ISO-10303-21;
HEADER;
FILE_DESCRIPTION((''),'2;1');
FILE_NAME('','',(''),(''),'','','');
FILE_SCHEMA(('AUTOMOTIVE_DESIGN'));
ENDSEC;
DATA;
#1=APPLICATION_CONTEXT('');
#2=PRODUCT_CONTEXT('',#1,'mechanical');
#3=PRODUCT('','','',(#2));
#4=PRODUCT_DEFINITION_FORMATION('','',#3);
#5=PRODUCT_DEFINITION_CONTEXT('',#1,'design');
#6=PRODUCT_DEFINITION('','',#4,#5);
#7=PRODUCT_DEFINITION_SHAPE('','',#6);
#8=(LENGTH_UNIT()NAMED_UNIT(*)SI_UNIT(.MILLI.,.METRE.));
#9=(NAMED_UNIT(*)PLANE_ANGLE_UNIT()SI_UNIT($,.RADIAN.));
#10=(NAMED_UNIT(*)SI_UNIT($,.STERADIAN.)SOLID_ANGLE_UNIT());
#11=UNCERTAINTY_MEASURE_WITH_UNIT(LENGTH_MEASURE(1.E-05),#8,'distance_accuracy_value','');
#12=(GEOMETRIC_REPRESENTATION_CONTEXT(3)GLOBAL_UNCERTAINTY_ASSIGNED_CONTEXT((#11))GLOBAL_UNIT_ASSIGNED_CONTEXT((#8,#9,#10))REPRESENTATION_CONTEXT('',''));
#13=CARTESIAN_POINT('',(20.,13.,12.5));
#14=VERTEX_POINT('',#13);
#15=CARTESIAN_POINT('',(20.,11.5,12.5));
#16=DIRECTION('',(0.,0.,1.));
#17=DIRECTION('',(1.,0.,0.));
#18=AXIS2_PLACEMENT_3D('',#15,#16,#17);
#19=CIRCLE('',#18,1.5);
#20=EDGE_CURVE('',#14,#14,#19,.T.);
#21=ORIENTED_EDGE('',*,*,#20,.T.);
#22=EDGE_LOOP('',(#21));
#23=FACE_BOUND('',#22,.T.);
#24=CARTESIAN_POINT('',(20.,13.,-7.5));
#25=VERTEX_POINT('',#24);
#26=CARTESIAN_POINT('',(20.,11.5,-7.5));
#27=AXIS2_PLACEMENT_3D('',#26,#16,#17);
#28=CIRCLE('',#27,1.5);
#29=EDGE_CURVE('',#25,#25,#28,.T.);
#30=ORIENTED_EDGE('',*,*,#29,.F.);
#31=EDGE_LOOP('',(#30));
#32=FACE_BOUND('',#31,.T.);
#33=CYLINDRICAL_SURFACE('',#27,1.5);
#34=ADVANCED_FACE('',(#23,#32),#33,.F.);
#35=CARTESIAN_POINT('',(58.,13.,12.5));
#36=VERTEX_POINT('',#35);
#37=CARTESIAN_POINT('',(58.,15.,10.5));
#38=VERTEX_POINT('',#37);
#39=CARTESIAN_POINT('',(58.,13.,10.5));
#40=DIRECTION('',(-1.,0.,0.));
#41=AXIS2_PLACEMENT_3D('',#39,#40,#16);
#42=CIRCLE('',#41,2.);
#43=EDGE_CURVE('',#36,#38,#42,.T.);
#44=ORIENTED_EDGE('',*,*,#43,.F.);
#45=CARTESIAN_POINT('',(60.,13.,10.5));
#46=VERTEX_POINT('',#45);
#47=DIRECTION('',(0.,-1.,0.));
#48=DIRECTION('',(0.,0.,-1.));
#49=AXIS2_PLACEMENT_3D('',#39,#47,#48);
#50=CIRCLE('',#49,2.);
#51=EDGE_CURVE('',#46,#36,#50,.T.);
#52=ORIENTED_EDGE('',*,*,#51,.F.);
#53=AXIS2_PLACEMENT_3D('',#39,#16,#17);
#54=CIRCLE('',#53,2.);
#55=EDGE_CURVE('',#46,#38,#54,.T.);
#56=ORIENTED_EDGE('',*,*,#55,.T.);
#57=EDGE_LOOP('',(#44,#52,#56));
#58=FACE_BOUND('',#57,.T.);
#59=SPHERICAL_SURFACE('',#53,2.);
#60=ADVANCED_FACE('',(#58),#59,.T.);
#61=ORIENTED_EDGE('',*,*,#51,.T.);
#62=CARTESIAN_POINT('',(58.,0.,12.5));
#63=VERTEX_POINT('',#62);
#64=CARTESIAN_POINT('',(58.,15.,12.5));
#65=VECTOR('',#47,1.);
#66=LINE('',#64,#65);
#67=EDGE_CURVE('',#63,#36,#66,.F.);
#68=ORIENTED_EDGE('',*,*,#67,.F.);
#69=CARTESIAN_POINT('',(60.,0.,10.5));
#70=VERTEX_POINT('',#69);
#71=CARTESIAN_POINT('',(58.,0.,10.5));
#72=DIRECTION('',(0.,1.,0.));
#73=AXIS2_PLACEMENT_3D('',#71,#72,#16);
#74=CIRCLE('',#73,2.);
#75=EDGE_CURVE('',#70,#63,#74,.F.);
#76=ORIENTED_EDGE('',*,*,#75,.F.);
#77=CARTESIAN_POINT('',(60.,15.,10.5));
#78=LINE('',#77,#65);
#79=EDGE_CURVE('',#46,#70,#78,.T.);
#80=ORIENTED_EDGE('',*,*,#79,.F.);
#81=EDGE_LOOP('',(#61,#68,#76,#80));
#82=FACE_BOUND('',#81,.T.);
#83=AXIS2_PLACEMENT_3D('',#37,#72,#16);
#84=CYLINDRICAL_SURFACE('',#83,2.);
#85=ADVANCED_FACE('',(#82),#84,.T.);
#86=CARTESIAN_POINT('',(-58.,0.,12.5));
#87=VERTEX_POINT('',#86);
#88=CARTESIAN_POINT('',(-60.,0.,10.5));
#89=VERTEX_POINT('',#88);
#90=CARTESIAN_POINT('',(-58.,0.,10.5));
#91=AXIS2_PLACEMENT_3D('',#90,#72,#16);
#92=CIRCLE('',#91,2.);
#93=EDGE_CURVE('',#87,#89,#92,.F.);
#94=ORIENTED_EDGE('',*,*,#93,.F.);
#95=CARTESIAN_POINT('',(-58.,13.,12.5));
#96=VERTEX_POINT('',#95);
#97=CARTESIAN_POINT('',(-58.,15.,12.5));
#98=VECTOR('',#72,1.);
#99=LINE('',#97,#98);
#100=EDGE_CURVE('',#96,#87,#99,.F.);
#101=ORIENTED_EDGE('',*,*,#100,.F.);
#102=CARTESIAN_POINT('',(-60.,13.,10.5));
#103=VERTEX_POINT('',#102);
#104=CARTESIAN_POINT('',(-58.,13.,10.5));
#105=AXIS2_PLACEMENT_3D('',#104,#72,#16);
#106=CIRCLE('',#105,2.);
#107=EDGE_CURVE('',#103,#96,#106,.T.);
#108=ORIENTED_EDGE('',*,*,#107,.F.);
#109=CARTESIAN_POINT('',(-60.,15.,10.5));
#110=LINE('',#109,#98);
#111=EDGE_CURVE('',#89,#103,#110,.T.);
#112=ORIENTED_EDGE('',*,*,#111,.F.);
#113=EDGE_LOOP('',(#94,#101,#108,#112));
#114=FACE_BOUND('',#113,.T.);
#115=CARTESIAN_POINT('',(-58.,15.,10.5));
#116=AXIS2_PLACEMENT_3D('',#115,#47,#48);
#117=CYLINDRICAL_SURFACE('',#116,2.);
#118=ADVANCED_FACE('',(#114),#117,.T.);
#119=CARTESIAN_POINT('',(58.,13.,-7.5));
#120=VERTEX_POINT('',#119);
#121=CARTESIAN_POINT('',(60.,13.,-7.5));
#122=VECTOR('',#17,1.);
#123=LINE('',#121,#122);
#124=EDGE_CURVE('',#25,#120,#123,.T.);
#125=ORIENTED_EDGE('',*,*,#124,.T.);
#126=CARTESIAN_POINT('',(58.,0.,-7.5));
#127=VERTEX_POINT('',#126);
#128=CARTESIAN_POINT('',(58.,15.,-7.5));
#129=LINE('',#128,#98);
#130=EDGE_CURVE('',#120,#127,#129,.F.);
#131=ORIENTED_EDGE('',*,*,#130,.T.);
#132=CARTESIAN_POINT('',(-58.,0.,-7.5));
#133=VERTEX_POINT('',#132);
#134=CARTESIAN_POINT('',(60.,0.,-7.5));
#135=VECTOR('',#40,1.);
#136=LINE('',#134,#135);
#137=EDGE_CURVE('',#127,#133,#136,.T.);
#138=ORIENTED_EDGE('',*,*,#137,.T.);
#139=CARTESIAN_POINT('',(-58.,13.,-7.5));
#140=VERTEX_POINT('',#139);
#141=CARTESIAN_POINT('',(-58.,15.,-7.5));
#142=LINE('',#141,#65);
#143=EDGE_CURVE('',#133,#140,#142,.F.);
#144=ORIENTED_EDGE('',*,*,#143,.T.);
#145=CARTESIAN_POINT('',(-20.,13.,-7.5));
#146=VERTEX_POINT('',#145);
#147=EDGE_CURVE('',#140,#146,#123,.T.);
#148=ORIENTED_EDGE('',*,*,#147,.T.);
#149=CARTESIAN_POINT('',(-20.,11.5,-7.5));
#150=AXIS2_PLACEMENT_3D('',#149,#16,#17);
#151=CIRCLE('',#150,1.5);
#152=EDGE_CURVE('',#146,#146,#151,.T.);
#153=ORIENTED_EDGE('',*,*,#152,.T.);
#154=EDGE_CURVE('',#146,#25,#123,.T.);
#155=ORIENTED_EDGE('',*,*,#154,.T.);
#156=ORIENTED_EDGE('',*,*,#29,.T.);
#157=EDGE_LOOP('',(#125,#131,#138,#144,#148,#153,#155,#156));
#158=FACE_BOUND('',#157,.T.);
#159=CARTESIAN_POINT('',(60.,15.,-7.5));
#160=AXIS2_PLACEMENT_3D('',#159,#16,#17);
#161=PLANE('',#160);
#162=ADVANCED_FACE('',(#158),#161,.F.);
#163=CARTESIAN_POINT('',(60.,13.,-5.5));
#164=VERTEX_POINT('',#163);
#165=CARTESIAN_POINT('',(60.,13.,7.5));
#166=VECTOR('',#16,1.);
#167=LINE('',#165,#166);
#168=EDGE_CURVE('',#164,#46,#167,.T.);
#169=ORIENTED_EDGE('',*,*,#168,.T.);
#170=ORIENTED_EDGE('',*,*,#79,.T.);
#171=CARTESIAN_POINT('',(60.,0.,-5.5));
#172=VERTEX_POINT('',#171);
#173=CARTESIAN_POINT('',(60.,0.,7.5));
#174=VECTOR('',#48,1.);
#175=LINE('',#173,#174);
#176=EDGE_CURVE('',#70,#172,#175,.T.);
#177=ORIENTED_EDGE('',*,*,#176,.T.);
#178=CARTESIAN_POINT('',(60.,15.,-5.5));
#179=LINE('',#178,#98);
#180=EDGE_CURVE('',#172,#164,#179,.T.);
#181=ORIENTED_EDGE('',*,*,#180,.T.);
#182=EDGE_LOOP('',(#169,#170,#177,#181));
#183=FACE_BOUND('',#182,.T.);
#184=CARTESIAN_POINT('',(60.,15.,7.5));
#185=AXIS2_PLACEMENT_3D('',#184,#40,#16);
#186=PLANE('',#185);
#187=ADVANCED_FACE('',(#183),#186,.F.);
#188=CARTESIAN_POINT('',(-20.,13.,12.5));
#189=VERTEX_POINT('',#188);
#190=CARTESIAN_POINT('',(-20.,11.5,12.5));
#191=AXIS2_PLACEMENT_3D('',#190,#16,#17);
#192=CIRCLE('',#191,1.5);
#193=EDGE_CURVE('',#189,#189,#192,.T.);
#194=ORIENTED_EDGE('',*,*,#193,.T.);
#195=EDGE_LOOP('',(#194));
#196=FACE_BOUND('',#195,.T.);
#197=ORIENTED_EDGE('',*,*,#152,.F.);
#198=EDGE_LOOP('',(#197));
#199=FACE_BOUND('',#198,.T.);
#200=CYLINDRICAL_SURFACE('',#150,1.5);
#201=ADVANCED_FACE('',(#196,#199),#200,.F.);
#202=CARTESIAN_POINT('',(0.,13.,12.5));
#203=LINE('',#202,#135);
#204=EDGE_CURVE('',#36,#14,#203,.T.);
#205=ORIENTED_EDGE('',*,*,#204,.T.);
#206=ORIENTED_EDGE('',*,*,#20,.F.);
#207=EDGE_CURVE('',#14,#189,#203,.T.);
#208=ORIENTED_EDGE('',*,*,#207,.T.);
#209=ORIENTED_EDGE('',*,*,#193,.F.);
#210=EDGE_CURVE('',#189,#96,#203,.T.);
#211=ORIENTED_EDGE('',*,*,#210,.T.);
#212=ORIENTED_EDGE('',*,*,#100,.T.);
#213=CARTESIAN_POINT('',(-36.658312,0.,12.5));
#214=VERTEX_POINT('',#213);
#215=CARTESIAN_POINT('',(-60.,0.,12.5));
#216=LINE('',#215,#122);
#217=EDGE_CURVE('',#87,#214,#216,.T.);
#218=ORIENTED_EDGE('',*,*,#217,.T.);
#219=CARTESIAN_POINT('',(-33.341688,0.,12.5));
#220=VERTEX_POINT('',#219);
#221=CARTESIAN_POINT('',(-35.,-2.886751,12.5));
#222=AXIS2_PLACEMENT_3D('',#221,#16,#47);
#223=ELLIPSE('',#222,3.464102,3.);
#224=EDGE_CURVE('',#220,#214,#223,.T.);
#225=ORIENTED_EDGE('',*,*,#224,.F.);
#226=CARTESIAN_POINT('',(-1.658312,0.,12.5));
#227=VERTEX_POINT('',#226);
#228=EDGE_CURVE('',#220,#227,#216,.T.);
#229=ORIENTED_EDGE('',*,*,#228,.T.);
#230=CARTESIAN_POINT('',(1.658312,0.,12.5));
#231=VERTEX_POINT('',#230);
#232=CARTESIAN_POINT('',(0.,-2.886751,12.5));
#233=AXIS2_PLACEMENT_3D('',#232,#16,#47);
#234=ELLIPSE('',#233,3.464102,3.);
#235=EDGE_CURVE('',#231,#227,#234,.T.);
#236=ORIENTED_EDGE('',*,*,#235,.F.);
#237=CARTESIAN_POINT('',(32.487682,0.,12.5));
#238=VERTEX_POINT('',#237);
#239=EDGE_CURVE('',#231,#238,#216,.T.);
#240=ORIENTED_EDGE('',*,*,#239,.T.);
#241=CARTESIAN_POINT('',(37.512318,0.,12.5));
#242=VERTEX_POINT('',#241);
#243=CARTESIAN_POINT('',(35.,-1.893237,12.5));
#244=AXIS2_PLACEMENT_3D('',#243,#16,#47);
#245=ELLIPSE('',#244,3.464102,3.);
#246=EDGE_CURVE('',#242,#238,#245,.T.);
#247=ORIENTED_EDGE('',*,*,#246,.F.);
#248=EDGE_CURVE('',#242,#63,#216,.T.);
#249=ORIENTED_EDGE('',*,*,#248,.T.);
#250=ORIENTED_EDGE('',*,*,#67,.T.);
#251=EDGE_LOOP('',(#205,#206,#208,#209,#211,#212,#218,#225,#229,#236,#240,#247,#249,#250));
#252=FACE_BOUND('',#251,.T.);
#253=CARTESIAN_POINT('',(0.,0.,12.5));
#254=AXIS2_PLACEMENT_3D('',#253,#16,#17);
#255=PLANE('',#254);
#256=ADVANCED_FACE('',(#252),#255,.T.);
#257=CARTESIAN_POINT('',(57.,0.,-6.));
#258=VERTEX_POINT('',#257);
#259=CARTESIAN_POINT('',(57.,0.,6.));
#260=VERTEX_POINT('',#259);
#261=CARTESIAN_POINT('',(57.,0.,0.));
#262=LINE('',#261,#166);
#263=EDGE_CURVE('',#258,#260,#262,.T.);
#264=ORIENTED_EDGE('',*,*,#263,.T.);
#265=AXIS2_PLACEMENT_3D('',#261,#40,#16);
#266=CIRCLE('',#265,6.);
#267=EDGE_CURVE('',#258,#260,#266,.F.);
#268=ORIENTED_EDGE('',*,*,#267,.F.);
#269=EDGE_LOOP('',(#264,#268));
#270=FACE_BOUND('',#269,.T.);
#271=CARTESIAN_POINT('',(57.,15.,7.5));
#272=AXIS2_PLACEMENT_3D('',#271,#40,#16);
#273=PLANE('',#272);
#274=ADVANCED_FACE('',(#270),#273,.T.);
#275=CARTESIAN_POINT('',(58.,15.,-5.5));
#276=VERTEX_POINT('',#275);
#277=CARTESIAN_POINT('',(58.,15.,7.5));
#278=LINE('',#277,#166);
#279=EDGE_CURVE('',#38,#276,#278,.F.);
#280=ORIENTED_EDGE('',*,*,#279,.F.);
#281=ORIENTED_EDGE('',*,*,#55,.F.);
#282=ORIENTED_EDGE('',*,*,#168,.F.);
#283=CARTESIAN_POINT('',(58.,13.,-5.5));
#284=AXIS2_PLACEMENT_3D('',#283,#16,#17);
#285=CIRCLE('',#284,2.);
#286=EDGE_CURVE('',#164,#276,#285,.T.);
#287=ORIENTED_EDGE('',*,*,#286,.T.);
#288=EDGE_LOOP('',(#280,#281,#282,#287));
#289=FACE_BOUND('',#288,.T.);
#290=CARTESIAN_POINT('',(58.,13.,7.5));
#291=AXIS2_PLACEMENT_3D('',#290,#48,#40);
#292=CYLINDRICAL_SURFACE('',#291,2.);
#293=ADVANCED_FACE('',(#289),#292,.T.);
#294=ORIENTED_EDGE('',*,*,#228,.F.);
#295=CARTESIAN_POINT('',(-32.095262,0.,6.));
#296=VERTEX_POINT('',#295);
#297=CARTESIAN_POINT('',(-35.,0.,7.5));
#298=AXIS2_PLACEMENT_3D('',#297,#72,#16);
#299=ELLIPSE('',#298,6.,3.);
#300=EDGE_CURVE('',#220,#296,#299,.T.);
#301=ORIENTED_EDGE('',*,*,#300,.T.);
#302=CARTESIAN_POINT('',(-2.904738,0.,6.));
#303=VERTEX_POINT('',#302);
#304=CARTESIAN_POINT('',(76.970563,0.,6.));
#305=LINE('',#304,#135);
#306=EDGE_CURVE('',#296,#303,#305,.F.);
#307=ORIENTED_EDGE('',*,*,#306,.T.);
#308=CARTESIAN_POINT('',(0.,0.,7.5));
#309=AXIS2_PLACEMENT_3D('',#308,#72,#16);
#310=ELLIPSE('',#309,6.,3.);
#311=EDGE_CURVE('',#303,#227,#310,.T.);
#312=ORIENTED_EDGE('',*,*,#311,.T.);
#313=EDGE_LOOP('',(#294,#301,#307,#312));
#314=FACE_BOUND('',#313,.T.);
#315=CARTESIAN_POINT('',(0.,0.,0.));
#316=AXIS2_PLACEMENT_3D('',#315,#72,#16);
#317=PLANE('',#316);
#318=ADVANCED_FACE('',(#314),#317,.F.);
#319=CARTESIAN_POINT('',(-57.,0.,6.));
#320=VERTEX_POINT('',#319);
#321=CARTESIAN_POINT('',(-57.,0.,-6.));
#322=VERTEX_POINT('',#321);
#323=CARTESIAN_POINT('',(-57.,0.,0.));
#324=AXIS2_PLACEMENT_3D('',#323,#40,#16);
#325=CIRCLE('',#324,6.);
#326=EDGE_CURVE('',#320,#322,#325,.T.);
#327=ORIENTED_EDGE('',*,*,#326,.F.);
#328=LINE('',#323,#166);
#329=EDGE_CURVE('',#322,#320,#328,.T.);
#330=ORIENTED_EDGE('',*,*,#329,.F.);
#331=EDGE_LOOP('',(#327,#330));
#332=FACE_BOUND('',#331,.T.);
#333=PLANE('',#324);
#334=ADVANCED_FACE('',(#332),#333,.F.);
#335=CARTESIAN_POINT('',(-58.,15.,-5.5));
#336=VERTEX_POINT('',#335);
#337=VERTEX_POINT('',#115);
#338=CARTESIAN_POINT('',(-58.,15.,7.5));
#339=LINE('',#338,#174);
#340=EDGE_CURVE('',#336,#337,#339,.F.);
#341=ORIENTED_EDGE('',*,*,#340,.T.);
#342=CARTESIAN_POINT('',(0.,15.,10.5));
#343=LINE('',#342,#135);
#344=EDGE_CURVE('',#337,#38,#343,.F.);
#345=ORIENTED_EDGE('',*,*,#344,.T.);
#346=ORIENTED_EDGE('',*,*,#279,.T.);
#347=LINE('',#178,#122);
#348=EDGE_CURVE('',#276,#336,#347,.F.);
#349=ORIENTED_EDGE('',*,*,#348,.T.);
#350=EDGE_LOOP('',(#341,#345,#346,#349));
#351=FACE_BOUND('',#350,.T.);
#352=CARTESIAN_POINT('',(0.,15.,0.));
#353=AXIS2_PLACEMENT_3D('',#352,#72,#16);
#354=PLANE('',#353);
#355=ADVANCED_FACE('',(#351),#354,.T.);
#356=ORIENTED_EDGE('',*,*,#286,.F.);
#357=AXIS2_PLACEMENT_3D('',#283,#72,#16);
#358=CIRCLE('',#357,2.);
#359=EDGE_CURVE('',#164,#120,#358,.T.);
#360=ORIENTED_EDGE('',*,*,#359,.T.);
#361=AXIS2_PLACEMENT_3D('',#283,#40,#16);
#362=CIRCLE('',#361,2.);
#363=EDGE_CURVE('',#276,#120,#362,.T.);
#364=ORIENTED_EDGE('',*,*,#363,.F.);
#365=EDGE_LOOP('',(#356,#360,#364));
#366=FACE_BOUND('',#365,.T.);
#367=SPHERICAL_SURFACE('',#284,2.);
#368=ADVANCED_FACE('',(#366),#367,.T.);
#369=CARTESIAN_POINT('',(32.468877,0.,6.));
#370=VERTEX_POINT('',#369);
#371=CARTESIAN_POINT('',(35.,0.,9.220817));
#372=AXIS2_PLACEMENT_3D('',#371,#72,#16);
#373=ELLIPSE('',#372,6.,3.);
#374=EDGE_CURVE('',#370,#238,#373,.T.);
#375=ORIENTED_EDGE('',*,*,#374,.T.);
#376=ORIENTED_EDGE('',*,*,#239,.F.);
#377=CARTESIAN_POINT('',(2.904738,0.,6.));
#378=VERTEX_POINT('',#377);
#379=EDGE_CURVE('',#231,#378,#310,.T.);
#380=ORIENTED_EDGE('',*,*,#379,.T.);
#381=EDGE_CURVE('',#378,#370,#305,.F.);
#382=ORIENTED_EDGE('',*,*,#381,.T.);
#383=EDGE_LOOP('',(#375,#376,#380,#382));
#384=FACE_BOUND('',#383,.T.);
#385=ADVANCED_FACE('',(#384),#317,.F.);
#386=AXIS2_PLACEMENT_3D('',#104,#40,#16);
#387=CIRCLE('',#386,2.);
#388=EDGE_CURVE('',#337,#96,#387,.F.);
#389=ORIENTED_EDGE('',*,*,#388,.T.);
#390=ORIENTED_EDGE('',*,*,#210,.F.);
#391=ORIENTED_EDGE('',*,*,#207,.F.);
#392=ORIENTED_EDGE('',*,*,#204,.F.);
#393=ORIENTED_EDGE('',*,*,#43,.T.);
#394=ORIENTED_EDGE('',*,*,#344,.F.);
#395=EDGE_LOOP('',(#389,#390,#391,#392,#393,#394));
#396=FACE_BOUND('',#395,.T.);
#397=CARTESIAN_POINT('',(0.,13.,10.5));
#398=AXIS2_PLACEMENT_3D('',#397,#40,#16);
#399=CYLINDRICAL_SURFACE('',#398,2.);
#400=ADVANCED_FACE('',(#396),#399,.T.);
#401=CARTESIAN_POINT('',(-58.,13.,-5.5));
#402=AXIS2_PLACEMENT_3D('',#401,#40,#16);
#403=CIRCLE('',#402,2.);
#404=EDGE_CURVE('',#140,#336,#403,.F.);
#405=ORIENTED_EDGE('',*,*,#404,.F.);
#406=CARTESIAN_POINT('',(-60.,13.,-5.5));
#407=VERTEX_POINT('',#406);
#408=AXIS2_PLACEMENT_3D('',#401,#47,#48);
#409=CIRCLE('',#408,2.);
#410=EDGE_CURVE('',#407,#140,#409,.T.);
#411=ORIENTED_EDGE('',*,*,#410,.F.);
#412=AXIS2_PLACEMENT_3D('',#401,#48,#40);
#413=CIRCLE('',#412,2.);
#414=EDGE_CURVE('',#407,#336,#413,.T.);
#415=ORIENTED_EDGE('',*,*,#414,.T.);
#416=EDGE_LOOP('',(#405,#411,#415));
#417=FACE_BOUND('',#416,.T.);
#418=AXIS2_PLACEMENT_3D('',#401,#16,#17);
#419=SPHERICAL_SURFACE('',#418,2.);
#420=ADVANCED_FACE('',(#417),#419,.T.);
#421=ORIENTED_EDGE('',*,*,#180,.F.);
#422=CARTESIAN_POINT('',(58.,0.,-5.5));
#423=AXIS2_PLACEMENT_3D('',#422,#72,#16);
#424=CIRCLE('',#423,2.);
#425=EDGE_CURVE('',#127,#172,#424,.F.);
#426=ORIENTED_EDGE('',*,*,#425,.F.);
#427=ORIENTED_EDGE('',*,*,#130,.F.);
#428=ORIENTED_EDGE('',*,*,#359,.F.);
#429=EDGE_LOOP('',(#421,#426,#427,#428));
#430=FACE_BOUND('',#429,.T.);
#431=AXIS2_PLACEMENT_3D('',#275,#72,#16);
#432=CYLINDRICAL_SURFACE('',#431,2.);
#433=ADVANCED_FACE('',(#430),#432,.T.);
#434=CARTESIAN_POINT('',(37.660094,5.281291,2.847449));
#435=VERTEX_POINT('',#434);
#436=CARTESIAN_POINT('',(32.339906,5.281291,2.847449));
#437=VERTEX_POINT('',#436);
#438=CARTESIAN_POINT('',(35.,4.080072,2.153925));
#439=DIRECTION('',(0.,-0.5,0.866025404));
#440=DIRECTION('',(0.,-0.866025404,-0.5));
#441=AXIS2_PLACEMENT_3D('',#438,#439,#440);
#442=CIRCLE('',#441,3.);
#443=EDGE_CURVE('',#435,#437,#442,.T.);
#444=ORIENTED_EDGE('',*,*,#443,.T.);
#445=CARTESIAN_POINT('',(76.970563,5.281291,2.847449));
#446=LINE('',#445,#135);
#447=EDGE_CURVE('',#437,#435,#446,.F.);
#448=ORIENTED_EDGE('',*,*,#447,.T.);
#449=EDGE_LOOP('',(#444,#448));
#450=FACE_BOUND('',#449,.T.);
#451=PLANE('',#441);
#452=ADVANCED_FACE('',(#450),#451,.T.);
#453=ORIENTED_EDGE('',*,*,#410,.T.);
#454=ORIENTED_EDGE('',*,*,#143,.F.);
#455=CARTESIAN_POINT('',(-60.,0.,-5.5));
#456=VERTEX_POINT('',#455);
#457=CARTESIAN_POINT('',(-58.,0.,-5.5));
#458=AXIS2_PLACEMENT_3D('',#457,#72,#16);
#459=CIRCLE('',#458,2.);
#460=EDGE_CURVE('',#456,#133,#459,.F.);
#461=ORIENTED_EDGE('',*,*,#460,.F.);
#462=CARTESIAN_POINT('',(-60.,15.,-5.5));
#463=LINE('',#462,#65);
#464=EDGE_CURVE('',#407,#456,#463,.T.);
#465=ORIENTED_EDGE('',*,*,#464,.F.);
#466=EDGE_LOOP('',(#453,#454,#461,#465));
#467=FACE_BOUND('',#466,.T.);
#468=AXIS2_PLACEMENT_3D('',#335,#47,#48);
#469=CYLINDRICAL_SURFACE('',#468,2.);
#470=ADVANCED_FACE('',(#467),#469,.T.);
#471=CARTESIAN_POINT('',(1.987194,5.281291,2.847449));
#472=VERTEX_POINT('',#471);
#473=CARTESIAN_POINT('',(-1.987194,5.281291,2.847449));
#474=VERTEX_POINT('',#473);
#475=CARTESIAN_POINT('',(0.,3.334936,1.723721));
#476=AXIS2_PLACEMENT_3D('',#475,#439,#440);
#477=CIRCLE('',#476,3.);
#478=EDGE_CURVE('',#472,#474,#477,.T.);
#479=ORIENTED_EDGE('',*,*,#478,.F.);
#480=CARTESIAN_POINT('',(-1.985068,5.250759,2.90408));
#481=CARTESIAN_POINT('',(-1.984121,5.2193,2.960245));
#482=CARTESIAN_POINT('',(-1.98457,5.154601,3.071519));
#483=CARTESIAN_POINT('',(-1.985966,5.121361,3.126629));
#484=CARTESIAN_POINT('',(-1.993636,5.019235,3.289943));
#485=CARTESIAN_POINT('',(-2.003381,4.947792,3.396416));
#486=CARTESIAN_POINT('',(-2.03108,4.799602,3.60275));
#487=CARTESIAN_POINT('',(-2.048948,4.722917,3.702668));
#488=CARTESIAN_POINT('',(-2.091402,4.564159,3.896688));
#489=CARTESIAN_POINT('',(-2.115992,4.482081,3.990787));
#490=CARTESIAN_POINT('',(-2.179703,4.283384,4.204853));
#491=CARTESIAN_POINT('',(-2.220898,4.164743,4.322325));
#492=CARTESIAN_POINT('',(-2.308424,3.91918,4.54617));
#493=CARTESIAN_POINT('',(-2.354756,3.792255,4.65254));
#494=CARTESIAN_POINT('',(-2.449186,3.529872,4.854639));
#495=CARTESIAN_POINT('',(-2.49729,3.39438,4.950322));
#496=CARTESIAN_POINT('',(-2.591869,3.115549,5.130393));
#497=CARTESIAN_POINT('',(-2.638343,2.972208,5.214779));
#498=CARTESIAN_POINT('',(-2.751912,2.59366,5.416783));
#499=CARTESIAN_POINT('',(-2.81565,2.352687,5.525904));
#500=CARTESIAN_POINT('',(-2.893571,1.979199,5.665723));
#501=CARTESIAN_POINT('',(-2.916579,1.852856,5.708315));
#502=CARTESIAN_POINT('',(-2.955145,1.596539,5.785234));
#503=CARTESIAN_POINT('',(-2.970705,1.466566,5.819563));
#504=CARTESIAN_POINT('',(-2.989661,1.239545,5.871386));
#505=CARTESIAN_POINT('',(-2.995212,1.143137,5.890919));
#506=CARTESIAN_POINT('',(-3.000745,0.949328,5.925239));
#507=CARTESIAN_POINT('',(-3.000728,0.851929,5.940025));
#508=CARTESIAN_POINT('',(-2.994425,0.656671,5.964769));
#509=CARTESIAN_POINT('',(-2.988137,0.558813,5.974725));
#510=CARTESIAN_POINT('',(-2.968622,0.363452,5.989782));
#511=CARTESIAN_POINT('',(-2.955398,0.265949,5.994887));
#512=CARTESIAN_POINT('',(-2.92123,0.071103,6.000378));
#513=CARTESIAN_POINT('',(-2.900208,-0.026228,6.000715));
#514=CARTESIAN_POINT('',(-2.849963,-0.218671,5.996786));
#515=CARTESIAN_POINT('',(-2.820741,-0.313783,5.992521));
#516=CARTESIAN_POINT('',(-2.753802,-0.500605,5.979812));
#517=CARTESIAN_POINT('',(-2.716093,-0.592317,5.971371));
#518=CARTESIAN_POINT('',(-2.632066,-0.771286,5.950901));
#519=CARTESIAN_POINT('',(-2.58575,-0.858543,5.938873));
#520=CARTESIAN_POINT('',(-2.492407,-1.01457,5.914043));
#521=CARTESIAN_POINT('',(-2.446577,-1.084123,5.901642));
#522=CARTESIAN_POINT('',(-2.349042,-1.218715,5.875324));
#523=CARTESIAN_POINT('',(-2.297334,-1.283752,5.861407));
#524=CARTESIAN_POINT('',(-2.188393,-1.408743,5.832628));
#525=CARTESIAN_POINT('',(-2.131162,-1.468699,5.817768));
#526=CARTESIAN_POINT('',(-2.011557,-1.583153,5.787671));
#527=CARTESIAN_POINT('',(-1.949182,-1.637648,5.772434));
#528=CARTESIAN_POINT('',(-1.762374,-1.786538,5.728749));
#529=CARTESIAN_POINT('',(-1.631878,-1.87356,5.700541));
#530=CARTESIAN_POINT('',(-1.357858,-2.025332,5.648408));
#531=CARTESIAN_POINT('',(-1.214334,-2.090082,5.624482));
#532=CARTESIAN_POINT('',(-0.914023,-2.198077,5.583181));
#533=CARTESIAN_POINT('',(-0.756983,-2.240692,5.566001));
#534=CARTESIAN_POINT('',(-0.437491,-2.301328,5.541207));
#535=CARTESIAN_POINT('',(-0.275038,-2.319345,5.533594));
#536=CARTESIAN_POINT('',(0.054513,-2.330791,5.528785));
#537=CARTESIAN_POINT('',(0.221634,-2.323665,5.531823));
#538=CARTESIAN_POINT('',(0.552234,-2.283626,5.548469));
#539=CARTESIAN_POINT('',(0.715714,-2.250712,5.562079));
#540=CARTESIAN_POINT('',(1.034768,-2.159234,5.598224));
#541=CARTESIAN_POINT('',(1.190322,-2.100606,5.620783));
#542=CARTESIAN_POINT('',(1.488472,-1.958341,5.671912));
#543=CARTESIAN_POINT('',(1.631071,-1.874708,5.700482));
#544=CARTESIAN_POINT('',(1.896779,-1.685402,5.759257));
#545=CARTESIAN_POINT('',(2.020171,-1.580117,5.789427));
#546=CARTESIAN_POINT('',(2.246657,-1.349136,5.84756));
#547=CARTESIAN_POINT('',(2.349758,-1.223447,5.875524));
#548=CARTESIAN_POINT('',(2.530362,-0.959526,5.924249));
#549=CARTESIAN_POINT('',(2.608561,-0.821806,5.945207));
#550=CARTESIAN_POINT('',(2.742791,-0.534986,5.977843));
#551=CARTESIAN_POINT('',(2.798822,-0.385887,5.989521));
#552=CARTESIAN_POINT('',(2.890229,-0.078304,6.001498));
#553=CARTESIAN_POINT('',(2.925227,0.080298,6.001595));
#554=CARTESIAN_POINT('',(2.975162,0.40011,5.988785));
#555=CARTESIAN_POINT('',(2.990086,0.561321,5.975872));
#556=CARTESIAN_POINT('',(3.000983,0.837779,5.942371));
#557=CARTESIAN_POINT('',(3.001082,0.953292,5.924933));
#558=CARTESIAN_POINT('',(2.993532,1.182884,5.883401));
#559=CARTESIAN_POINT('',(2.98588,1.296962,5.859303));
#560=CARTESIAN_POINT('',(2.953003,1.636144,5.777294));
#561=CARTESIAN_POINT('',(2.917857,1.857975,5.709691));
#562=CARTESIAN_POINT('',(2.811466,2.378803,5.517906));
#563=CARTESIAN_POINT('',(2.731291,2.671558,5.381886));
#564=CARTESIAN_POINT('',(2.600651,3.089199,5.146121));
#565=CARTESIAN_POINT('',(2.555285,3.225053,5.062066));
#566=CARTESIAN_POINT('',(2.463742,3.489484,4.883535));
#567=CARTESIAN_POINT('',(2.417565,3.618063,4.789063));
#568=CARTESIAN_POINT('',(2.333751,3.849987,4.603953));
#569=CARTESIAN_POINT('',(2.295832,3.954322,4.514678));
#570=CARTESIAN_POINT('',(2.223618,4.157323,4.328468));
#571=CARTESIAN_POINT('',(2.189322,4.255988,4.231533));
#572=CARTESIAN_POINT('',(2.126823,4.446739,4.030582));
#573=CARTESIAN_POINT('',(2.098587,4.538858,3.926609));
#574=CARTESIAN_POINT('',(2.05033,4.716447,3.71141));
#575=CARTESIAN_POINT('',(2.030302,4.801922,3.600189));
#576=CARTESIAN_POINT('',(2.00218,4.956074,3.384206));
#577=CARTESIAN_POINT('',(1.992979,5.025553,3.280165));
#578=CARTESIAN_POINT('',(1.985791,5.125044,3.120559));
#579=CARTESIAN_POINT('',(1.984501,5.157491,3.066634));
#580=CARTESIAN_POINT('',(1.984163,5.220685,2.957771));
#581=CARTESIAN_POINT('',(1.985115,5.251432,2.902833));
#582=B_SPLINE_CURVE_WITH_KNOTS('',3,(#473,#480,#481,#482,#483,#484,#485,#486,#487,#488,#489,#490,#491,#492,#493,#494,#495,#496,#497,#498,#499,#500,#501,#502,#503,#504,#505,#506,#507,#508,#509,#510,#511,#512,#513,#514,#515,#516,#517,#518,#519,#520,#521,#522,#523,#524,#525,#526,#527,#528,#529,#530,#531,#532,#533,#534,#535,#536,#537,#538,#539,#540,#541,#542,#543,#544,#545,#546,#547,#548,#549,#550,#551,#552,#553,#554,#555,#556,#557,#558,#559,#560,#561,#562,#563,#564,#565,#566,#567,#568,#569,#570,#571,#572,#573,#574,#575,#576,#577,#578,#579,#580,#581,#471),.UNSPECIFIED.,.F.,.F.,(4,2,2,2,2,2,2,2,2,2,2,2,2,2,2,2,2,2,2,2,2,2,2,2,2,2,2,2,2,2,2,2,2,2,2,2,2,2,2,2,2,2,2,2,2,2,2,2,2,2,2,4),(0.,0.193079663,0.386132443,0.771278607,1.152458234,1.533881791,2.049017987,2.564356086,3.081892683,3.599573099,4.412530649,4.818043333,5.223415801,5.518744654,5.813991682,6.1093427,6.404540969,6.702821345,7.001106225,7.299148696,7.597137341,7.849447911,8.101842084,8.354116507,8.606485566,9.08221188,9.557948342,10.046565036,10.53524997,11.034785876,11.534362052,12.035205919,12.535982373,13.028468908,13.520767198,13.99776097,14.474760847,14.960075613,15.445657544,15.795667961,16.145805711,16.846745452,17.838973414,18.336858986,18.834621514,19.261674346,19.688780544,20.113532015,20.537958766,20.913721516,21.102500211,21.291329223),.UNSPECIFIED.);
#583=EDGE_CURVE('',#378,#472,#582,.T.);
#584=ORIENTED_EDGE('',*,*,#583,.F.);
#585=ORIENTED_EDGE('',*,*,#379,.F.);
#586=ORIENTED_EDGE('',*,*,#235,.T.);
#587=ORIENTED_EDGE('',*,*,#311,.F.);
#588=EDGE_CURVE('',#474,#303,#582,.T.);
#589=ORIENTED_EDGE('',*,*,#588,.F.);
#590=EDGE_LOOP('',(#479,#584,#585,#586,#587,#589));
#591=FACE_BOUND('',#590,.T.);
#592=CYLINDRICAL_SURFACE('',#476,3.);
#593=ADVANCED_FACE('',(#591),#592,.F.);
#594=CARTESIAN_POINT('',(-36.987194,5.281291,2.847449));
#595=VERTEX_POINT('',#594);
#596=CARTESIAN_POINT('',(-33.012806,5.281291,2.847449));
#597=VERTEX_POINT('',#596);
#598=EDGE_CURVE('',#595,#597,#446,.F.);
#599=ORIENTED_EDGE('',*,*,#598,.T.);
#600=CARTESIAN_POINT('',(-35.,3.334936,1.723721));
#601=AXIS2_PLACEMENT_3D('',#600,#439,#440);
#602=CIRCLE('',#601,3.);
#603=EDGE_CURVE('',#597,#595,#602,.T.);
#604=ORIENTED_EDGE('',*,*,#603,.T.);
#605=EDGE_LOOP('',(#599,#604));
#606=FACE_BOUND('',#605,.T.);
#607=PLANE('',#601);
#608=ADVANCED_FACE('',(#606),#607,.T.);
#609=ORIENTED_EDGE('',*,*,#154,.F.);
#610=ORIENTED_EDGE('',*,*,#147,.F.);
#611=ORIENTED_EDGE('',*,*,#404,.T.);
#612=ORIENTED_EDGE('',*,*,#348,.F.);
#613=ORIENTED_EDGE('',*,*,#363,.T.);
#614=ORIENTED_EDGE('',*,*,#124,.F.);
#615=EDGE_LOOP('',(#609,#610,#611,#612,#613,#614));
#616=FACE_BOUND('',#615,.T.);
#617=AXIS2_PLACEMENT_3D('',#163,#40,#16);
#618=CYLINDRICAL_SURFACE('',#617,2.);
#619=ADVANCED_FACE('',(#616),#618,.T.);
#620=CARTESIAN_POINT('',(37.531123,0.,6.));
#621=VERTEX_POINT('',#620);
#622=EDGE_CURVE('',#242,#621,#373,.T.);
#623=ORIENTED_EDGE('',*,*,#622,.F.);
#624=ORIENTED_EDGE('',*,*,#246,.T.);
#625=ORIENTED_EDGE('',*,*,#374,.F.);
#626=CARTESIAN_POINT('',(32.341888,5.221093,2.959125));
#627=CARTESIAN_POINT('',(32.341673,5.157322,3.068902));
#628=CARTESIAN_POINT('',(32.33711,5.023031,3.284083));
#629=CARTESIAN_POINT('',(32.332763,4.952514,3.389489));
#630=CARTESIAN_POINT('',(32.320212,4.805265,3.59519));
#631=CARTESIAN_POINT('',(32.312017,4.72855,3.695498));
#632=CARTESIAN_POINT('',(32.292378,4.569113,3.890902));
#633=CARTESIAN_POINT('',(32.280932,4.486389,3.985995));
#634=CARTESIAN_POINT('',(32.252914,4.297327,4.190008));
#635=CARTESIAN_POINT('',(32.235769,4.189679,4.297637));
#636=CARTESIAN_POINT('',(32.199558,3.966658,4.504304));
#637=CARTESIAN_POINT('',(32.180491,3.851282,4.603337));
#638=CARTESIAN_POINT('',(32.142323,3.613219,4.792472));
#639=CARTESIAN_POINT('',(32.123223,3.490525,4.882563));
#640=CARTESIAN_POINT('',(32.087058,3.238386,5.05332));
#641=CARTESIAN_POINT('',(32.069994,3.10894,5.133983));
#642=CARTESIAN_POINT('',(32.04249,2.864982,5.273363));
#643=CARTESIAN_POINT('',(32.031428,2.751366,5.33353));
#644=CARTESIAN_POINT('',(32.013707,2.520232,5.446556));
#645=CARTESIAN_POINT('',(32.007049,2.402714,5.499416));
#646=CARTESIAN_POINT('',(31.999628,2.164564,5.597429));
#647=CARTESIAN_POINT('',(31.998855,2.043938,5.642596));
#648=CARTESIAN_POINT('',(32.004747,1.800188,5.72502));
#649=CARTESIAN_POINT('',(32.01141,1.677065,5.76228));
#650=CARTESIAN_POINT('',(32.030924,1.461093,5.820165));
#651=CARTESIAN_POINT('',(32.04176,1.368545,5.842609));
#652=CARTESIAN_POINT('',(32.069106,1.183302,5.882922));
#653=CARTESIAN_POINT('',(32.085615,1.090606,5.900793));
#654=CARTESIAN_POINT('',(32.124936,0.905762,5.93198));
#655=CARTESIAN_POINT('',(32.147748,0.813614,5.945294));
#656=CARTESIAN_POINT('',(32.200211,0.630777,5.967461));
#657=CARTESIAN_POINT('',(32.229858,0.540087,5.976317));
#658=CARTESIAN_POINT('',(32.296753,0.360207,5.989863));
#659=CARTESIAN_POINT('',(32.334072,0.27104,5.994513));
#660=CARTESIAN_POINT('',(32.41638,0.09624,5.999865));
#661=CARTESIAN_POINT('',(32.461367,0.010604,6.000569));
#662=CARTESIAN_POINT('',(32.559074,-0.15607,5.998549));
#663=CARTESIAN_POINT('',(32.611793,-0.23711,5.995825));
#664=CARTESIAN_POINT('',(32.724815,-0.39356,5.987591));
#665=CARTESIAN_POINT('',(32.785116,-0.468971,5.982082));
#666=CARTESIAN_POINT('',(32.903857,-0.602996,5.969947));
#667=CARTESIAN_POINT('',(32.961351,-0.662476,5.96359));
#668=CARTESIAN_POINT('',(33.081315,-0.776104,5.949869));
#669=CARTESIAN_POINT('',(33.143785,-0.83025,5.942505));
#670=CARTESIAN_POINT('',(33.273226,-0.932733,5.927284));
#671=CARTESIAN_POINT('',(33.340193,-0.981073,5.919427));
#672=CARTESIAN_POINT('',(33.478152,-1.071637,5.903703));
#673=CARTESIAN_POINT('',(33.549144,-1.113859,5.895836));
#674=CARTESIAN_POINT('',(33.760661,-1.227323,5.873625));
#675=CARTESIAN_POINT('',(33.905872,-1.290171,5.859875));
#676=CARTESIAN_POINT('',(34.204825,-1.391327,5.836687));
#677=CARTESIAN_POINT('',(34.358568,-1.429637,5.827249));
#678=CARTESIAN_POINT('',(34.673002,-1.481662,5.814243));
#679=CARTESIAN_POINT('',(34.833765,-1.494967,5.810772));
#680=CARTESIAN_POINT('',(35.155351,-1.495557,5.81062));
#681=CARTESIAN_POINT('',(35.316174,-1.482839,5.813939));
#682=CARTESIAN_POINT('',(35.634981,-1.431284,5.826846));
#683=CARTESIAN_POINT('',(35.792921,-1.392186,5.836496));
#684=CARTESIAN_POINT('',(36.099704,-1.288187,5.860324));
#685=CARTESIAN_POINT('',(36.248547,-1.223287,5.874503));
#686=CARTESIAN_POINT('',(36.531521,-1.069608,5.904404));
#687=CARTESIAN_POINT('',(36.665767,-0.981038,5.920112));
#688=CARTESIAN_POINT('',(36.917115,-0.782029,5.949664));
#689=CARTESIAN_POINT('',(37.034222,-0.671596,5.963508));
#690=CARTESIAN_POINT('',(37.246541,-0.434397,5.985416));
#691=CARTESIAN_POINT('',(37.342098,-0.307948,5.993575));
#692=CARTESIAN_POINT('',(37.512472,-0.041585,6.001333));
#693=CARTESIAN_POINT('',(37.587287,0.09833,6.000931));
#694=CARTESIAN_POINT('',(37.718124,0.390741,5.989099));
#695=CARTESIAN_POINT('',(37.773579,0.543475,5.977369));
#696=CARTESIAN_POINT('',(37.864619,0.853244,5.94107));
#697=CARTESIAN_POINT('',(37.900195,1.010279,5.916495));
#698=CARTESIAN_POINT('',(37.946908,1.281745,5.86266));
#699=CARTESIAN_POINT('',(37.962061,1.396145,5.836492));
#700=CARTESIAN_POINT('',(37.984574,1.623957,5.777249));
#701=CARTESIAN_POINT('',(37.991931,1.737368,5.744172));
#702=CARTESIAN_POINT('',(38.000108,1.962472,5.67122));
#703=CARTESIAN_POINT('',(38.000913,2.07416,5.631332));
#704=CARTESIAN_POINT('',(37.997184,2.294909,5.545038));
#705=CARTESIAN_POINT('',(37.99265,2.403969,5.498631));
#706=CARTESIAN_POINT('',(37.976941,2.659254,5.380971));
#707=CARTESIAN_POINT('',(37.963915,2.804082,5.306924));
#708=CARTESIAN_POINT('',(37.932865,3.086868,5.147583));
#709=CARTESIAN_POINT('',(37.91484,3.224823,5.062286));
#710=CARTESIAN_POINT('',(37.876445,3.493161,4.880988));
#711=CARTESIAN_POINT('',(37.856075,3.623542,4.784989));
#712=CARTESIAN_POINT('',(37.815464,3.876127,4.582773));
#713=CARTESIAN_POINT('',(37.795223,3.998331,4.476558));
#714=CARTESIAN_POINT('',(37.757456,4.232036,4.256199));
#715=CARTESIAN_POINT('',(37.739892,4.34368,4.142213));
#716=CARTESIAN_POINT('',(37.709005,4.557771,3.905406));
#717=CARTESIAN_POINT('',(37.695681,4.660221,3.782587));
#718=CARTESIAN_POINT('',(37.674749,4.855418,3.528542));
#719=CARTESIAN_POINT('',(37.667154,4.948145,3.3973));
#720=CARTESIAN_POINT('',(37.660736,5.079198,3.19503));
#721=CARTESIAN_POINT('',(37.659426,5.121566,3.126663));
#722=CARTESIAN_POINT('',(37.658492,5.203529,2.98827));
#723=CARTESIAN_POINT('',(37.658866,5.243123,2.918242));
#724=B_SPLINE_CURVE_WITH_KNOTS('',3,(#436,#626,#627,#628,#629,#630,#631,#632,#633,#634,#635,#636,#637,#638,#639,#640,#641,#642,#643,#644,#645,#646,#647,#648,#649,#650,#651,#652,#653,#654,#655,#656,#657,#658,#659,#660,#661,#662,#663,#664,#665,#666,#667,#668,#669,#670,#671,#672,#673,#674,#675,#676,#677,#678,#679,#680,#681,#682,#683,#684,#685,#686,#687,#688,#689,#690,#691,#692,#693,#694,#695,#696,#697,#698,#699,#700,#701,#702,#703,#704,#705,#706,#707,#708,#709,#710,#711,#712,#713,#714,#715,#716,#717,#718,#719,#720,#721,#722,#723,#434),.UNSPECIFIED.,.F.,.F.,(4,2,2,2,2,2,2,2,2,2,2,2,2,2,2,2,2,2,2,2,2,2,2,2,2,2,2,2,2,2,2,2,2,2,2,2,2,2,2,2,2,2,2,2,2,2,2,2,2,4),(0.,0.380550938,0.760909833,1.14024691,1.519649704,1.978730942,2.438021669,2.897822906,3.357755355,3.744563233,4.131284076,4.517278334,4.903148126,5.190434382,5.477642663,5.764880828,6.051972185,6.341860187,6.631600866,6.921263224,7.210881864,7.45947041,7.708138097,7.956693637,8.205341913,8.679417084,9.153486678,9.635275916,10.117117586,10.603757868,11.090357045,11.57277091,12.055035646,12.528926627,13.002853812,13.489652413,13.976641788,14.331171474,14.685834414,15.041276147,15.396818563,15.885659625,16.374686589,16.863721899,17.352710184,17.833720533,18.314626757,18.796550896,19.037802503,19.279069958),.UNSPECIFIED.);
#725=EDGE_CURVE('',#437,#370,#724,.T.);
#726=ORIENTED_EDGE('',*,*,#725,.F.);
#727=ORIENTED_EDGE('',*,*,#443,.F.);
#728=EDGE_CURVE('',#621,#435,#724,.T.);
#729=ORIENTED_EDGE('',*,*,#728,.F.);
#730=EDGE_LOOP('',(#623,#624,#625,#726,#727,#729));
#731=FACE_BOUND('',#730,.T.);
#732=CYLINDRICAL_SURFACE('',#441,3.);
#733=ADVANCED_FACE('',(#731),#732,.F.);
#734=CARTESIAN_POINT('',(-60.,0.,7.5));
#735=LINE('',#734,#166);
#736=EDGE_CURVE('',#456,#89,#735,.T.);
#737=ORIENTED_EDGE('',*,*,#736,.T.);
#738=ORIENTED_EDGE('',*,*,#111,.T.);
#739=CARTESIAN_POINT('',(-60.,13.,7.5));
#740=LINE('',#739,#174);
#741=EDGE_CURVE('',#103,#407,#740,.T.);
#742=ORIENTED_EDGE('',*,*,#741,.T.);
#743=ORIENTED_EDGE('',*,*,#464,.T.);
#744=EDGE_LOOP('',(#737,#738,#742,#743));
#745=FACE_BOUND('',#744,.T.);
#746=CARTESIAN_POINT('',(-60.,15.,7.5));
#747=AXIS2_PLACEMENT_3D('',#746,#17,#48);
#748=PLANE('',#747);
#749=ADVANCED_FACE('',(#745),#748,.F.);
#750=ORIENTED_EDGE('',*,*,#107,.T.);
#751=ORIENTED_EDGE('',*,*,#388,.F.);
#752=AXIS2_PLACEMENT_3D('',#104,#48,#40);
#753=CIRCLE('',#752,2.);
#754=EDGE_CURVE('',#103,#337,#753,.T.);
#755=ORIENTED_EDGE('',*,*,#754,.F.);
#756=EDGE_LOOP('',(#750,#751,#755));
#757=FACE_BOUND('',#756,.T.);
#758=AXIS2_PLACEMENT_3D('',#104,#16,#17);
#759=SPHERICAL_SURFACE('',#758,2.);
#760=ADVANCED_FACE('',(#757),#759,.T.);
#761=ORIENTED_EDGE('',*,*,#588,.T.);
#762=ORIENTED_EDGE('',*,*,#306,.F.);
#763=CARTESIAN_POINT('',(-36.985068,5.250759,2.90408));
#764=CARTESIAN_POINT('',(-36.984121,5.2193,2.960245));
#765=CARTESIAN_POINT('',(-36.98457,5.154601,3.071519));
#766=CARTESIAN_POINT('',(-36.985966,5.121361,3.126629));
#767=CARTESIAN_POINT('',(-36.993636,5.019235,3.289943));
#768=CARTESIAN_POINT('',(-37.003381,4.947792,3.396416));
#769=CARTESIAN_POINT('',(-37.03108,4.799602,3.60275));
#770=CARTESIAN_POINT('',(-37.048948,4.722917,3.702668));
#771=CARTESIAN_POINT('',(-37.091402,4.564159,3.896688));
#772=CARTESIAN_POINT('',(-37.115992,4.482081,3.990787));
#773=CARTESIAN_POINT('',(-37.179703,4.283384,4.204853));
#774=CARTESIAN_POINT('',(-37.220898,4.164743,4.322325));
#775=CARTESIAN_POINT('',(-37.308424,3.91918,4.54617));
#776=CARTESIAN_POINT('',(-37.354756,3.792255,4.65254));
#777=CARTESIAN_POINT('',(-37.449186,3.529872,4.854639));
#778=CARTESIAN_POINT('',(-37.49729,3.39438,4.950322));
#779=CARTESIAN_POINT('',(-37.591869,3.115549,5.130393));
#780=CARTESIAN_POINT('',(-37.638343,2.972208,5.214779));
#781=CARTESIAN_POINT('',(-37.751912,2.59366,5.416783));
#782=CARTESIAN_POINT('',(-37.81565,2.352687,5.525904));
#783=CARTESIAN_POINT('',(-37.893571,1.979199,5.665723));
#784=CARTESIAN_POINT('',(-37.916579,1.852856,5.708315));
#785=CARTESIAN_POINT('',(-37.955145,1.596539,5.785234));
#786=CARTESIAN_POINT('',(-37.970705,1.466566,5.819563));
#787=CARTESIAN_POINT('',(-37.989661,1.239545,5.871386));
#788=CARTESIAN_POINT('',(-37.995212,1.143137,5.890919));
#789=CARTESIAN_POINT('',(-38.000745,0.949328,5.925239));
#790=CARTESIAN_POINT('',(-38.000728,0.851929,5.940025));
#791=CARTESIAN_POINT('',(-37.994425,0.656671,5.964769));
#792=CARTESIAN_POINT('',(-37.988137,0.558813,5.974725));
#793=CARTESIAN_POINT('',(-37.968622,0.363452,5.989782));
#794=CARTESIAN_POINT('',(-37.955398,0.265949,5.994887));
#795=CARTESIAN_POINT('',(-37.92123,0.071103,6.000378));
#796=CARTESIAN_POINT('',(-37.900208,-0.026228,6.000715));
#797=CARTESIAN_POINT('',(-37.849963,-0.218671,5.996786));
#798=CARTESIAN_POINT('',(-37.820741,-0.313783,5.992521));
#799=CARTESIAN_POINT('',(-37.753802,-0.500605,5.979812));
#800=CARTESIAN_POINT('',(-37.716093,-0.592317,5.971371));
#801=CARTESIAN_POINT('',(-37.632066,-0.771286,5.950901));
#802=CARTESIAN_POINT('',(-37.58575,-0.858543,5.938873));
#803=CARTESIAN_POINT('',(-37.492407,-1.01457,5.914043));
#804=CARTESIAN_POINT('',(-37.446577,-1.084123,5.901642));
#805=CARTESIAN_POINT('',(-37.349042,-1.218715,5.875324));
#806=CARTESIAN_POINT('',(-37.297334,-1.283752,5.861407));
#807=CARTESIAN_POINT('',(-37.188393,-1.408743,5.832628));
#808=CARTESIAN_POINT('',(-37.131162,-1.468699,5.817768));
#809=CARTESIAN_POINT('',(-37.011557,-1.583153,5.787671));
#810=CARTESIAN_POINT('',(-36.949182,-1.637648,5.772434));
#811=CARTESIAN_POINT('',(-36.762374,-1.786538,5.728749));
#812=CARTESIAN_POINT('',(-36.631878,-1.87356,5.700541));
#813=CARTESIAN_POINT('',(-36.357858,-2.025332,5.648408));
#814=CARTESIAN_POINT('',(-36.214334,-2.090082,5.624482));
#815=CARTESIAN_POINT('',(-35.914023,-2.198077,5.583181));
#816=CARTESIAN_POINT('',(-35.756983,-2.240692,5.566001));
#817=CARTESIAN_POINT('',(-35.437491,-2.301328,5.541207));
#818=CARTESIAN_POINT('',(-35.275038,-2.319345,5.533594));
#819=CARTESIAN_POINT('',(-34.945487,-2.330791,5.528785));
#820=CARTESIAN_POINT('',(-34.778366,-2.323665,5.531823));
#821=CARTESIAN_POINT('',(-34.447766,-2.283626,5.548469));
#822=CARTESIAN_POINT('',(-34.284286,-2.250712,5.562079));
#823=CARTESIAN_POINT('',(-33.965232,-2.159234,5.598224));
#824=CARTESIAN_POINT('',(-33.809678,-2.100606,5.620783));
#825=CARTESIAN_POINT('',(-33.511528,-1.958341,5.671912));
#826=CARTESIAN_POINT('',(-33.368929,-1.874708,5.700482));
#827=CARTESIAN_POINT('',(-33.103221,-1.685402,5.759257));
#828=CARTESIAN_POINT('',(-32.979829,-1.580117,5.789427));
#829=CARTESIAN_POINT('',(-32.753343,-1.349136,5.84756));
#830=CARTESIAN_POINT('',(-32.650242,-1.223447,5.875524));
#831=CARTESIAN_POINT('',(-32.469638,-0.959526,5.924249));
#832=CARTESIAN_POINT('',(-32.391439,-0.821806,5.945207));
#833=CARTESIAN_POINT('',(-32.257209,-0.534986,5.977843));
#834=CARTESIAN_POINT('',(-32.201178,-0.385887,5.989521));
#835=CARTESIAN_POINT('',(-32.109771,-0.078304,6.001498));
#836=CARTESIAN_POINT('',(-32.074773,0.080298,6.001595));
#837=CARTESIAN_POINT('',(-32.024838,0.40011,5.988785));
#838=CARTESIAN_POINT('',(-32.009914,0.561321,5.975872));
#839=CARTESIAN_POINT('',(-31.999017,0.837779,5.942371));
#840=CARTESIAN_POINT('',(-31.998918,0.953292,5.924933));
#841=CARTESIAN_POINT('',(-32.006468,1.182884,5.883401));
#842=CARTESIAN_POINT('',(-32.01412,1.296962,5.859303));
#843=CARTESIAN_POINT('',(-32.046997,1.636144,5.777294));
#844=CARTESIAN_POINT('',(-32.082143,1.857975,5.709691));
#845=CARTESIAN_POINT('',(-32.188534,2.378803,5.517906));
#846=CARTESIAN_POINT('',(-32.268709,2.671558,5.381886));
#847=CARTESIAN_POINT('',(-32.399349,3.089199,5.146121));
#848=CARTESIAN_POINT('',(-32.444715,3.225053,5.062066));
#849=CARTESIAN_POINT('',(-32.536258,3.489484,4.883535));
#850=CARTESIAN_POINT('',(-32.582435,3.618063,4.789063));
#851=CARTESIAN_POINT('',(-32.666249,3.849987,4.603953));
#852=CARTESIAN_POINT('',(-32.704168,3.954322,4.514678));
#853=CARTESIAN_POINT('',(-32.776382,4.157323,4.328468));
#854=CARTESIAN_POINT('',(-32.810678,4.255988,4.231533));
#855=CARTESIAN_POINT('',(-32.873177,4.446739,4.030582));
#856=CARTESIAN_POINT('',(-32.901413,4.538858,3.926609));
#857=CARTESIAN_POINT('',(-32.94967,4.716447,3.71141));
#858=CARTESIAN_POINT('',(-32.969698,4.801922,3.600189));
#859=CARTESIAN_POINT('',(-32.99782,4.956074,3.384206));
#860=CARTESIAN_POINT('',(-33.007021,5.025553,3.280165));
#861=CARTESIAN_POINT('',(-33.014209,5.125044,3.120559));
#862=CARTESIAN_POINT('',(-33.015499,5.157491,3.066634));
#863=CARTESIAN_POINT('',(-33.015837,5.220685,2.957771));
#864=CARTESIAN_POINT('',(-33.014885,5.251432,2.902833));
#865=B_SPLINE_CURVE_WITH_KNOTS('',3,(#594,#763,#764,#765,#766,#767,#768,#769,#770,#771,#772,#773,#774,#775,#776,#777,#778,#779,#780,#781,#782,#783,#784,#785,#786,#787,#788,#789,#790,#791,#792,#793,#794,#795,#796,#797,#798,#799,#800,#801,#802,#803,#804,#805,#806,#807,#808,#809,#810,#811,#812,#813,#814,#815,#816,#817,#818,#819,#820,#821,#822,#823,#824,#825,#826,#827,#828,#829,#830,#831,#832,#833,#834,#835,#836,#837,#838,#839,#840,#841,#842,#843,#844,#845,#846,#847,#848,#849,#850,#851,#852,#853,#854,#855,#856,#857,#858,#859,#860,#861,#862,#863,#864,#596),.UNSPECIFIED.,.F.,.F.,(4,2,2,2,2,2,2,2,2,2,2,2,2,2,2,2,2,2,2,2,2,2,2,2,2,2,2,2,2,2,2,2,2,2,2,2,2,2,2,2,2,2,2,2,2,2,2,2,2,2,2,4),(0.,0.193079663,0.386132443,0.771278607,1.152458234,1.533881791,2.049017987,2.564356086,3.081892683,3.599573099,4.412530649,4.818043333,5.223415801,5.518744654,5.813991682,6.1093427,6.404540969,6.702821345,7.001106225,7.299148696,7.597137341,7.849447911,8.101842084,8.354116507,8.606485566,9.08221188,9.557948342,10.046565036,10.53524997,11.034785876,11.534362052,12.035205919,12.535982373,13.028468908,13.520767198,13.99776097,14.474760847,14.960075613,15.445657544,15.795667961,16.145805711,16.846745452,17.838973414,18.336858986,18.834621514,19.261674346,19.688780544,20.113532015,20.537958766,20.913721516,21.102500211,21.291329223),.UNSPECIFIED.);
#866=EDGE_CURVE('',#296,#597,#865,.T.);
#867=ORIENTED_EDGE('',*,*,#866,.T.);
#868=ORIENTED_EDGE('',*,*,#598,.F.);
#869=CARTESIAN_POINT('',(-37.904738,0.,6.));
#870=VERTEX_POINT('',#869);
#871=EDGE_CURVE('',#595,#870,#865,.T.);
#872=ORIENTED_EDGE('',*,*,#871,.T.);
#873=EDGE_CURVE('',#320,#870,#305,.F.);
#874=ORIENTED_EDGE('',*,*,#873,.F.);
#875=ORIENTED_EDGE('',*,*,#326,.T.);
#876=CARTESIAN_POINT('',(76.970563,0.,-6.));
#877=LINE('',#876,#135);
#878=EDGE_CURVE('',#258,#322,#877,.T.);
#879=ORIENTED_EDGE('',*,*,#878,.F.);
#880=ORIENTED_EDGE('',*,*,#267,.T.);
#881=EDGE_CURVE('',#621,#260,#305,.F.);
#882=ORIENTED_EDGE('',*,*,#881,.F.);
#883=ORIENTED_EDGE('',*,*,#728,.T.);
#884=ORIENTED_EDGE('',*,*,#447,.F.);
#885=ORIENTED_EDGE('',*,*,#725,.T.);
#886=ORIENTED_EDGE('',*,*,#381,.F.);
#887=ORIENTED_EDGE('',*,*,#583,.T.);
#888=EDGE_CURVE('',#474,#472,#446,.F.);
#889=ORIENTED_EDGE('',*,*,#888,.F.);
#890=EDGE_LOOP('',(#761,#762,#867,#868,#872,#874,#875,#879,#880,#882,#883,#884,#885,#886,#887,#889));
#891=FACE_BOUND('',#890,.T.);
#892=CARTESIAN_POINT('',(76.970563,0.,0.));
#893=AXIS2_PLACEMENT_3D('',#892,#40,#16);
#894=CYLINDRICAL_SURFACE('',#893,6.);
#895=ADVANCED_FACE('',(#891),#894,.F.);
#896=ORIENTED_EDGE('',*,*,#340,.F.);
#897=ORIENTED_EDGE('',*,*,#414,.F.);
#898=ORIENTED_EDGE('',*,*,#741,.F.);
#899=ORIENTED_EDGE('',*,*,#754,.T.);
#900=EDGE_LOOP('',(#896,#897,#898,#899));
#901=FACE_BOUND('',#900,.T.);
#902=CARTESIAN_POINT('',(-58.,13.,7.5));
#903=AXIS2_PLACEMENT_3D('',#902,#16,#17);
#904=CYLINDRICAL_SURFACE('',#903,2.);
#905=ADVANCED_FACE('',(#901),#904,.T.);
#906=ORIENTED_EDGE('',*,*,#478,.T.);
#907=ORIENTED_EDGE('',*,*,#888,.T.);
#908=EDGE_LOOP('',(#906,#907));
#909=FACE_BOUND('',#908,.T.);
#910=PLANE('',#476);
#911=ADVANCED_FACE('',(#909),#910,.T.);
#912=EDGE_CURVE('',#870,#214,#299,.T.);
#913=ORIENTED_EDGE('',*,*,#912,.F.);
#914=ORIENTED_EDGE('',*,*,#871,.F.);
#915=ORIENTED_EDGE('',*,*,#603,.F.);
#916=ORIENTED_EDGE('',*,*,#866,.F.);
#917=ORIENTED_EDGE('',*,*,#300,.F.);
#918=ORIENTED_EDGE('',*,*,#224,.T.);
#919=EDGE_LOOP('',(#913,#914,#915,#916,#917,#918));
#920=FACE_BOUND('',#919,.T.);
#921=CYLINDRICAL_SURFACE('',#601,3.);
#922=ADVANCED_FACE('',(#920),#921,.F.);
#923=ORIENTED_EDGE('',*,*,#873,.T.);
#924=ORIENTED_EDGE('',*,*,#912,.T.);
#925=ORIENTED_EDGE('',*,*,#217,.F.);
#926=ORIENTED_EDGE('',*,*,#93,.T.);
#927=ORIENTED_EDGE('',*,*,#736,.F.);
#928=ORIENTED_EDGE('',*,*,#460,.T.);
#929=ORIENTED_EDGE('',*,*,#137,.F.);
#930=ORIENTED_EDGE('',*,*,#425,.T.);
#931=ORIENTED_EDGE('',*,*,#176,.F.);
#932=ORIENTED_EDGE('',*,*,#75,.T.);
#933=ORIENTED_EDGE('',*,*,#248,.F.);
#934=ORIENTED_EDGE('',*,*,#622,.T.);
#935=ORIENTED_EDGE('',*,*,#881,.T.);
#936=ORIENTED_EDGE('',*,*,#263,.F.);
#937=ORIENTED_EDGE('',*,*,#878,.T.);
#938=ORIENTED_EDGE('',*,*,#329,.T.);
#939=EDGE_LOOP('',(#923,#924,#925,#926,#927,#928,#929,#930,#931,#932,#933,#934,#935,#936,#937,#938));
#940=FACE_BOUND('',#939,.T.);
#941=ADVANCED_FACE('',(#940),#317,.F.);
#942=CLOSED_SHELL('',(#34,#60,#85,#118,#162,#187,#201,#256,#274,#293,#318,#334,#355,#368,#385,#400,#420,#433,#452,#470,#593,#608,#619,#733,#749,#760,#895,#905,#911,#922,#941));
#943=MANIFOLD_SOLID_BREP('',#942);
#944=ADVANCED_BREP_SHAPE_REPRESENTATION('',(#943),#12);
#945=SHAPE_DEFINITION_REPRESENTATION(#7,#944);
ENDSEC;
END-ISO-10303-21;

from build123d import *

# Parameters (mm, degrees)
SKETCH1_W           = 120
SKETCH1_H           = 15
BOSS_EXTRUDE1_DEPTH = 15
CUT_EXTRUDE4_START  = -3
SKETCH2_R           = 6
CUT_EXTRUDE4_DEPTH  = 114
SKETCH3_W           = 120
SKETCH3_H           = 15
BOSS_EXTRUDE2_DEPTH = 5
SKETCH5_R           = 3
CUT_EXTRUDE5_DEPTH  = 11
SKETCH6_R           = 1.5
CUT_EXTRUDE6_DEPTH  = 66
FILLET2_R           = 2
FILLET3_R           = 2
FILLET4_R           = 2
FILLET5_R           = 2


with BuildPart() as part:
    # Sketch1 → Boss-Extrude1 (new body)
    with BuildSketch(Plane(origin=(0, 0, 0), x_dir=(1, 0, 0), z_dir=(0, 1, 0))):
        Rectangle(SKETCH1_W, SKETCH1_H)
    extrude(amount=BOSS_EXTRUDE1_DEPTH)

    # Sketch2 → Cut-Extrude4 (cut)
    with BuildSketch(Plane.ZY.offset(60).offset(CUT_EXTRUDE4_START)):
        Circle(SKETCH2_R)
    extrude(amount=-CUT_EXTRUDE4_DEPTH, mode=Mode.SUBTRACT)

    # Sketch3 → Boss-Extrude2 (add)
    with BuildSketch(Plane.XY.offset(7.5)):
        with Locations((0, 7.5)):
            Rectangle(SKETCH3_W, SKETCH3_H)
    extrude(amount=BOSS_EXTRUDE2_DEPTH)

    # Sketch5 → Cut-Extrude5 (cut)
    with BuildSketch(Plane(origin=(0, -5.412658774, 9.375), x_dir=(1, 0, 0), z_dir=(0, -0.499999999999998, 0.8660254037844398))):
        with Locations((-35, 3.75)):
            Circle(SKETCH5_R)
        with Locations((0, 3.75)):
            Circle(SKETCH5_R)
        with Locations((35, 4.610408675)):
            Circle(SKETCH5_R)
    extrude(amount=-CUT_EXTRUDE5_DEPTH, mode=Mode.SUBTRACT)

    # Sketch6 → Cut-Extrude6 (cut, through all)
    with BuildSketch(Plane.XY.offset(12.5)):
        with Locations((-20, 11.5)):
            Circle(SKETCH6_R)
        with Locations((20, 11.5)):
            Circle(SKETCH6_R)
    extrude(amount=-CUT_EXTRUDE6_DEPTH, mode=Mode.SUBTRACT)

    # Fillet2
    fillet2_edges = [part.edges().sort_by_distance(p)[0] for p in [
        (0, 15, -7.5),
    ]]
    fillet(fillet2_edges, radius=FILLET2_R - 0.0001)  # a hair under: the kernel refuses the full size

    # Fillet3
    fillet3_edges = [part.edges().sort_by_distance(p)[0] for p in [
        (0, 15, 12.5),
    ]]
    fillet(fillet3_edges, radius=FILLET3_R - 0.0001)  # a hair under: the kernel refuses the full size

    # Fillet4
    fillet4_edges = [part.edges().sort_by_distance(p)[0] for p in [
        (-60, 6.50005, -7.5),
        (-60, 15, 2.5),
        (-60, 14.414242852, -6.914242852),
        (-60, 6.50005, 12.5),
        (-60, 14.414242852, 11.914242852),
    ]]
    fillet(fillet4_edges, radius=FILLET4_R - 0.0001)  # a hair under: the kernel refuses the full size

    # Fillet5
    fillet5_edges = [part.edges().sort_by_distance(p)[0] for p in [
        (60, 6.50005, 12.5),
        (60, 6.50005, -7.5),
        (60, 14.414242852, -6.914242852),
        (60, 15, 2.5),
        (60, 14.414242852, 11.914242852),
    ]]
    fillet(fillet5_edges, radius=FILLET5_R - 0.0001)  # a hair under: the kernel refuses the full size


solid = part.part
